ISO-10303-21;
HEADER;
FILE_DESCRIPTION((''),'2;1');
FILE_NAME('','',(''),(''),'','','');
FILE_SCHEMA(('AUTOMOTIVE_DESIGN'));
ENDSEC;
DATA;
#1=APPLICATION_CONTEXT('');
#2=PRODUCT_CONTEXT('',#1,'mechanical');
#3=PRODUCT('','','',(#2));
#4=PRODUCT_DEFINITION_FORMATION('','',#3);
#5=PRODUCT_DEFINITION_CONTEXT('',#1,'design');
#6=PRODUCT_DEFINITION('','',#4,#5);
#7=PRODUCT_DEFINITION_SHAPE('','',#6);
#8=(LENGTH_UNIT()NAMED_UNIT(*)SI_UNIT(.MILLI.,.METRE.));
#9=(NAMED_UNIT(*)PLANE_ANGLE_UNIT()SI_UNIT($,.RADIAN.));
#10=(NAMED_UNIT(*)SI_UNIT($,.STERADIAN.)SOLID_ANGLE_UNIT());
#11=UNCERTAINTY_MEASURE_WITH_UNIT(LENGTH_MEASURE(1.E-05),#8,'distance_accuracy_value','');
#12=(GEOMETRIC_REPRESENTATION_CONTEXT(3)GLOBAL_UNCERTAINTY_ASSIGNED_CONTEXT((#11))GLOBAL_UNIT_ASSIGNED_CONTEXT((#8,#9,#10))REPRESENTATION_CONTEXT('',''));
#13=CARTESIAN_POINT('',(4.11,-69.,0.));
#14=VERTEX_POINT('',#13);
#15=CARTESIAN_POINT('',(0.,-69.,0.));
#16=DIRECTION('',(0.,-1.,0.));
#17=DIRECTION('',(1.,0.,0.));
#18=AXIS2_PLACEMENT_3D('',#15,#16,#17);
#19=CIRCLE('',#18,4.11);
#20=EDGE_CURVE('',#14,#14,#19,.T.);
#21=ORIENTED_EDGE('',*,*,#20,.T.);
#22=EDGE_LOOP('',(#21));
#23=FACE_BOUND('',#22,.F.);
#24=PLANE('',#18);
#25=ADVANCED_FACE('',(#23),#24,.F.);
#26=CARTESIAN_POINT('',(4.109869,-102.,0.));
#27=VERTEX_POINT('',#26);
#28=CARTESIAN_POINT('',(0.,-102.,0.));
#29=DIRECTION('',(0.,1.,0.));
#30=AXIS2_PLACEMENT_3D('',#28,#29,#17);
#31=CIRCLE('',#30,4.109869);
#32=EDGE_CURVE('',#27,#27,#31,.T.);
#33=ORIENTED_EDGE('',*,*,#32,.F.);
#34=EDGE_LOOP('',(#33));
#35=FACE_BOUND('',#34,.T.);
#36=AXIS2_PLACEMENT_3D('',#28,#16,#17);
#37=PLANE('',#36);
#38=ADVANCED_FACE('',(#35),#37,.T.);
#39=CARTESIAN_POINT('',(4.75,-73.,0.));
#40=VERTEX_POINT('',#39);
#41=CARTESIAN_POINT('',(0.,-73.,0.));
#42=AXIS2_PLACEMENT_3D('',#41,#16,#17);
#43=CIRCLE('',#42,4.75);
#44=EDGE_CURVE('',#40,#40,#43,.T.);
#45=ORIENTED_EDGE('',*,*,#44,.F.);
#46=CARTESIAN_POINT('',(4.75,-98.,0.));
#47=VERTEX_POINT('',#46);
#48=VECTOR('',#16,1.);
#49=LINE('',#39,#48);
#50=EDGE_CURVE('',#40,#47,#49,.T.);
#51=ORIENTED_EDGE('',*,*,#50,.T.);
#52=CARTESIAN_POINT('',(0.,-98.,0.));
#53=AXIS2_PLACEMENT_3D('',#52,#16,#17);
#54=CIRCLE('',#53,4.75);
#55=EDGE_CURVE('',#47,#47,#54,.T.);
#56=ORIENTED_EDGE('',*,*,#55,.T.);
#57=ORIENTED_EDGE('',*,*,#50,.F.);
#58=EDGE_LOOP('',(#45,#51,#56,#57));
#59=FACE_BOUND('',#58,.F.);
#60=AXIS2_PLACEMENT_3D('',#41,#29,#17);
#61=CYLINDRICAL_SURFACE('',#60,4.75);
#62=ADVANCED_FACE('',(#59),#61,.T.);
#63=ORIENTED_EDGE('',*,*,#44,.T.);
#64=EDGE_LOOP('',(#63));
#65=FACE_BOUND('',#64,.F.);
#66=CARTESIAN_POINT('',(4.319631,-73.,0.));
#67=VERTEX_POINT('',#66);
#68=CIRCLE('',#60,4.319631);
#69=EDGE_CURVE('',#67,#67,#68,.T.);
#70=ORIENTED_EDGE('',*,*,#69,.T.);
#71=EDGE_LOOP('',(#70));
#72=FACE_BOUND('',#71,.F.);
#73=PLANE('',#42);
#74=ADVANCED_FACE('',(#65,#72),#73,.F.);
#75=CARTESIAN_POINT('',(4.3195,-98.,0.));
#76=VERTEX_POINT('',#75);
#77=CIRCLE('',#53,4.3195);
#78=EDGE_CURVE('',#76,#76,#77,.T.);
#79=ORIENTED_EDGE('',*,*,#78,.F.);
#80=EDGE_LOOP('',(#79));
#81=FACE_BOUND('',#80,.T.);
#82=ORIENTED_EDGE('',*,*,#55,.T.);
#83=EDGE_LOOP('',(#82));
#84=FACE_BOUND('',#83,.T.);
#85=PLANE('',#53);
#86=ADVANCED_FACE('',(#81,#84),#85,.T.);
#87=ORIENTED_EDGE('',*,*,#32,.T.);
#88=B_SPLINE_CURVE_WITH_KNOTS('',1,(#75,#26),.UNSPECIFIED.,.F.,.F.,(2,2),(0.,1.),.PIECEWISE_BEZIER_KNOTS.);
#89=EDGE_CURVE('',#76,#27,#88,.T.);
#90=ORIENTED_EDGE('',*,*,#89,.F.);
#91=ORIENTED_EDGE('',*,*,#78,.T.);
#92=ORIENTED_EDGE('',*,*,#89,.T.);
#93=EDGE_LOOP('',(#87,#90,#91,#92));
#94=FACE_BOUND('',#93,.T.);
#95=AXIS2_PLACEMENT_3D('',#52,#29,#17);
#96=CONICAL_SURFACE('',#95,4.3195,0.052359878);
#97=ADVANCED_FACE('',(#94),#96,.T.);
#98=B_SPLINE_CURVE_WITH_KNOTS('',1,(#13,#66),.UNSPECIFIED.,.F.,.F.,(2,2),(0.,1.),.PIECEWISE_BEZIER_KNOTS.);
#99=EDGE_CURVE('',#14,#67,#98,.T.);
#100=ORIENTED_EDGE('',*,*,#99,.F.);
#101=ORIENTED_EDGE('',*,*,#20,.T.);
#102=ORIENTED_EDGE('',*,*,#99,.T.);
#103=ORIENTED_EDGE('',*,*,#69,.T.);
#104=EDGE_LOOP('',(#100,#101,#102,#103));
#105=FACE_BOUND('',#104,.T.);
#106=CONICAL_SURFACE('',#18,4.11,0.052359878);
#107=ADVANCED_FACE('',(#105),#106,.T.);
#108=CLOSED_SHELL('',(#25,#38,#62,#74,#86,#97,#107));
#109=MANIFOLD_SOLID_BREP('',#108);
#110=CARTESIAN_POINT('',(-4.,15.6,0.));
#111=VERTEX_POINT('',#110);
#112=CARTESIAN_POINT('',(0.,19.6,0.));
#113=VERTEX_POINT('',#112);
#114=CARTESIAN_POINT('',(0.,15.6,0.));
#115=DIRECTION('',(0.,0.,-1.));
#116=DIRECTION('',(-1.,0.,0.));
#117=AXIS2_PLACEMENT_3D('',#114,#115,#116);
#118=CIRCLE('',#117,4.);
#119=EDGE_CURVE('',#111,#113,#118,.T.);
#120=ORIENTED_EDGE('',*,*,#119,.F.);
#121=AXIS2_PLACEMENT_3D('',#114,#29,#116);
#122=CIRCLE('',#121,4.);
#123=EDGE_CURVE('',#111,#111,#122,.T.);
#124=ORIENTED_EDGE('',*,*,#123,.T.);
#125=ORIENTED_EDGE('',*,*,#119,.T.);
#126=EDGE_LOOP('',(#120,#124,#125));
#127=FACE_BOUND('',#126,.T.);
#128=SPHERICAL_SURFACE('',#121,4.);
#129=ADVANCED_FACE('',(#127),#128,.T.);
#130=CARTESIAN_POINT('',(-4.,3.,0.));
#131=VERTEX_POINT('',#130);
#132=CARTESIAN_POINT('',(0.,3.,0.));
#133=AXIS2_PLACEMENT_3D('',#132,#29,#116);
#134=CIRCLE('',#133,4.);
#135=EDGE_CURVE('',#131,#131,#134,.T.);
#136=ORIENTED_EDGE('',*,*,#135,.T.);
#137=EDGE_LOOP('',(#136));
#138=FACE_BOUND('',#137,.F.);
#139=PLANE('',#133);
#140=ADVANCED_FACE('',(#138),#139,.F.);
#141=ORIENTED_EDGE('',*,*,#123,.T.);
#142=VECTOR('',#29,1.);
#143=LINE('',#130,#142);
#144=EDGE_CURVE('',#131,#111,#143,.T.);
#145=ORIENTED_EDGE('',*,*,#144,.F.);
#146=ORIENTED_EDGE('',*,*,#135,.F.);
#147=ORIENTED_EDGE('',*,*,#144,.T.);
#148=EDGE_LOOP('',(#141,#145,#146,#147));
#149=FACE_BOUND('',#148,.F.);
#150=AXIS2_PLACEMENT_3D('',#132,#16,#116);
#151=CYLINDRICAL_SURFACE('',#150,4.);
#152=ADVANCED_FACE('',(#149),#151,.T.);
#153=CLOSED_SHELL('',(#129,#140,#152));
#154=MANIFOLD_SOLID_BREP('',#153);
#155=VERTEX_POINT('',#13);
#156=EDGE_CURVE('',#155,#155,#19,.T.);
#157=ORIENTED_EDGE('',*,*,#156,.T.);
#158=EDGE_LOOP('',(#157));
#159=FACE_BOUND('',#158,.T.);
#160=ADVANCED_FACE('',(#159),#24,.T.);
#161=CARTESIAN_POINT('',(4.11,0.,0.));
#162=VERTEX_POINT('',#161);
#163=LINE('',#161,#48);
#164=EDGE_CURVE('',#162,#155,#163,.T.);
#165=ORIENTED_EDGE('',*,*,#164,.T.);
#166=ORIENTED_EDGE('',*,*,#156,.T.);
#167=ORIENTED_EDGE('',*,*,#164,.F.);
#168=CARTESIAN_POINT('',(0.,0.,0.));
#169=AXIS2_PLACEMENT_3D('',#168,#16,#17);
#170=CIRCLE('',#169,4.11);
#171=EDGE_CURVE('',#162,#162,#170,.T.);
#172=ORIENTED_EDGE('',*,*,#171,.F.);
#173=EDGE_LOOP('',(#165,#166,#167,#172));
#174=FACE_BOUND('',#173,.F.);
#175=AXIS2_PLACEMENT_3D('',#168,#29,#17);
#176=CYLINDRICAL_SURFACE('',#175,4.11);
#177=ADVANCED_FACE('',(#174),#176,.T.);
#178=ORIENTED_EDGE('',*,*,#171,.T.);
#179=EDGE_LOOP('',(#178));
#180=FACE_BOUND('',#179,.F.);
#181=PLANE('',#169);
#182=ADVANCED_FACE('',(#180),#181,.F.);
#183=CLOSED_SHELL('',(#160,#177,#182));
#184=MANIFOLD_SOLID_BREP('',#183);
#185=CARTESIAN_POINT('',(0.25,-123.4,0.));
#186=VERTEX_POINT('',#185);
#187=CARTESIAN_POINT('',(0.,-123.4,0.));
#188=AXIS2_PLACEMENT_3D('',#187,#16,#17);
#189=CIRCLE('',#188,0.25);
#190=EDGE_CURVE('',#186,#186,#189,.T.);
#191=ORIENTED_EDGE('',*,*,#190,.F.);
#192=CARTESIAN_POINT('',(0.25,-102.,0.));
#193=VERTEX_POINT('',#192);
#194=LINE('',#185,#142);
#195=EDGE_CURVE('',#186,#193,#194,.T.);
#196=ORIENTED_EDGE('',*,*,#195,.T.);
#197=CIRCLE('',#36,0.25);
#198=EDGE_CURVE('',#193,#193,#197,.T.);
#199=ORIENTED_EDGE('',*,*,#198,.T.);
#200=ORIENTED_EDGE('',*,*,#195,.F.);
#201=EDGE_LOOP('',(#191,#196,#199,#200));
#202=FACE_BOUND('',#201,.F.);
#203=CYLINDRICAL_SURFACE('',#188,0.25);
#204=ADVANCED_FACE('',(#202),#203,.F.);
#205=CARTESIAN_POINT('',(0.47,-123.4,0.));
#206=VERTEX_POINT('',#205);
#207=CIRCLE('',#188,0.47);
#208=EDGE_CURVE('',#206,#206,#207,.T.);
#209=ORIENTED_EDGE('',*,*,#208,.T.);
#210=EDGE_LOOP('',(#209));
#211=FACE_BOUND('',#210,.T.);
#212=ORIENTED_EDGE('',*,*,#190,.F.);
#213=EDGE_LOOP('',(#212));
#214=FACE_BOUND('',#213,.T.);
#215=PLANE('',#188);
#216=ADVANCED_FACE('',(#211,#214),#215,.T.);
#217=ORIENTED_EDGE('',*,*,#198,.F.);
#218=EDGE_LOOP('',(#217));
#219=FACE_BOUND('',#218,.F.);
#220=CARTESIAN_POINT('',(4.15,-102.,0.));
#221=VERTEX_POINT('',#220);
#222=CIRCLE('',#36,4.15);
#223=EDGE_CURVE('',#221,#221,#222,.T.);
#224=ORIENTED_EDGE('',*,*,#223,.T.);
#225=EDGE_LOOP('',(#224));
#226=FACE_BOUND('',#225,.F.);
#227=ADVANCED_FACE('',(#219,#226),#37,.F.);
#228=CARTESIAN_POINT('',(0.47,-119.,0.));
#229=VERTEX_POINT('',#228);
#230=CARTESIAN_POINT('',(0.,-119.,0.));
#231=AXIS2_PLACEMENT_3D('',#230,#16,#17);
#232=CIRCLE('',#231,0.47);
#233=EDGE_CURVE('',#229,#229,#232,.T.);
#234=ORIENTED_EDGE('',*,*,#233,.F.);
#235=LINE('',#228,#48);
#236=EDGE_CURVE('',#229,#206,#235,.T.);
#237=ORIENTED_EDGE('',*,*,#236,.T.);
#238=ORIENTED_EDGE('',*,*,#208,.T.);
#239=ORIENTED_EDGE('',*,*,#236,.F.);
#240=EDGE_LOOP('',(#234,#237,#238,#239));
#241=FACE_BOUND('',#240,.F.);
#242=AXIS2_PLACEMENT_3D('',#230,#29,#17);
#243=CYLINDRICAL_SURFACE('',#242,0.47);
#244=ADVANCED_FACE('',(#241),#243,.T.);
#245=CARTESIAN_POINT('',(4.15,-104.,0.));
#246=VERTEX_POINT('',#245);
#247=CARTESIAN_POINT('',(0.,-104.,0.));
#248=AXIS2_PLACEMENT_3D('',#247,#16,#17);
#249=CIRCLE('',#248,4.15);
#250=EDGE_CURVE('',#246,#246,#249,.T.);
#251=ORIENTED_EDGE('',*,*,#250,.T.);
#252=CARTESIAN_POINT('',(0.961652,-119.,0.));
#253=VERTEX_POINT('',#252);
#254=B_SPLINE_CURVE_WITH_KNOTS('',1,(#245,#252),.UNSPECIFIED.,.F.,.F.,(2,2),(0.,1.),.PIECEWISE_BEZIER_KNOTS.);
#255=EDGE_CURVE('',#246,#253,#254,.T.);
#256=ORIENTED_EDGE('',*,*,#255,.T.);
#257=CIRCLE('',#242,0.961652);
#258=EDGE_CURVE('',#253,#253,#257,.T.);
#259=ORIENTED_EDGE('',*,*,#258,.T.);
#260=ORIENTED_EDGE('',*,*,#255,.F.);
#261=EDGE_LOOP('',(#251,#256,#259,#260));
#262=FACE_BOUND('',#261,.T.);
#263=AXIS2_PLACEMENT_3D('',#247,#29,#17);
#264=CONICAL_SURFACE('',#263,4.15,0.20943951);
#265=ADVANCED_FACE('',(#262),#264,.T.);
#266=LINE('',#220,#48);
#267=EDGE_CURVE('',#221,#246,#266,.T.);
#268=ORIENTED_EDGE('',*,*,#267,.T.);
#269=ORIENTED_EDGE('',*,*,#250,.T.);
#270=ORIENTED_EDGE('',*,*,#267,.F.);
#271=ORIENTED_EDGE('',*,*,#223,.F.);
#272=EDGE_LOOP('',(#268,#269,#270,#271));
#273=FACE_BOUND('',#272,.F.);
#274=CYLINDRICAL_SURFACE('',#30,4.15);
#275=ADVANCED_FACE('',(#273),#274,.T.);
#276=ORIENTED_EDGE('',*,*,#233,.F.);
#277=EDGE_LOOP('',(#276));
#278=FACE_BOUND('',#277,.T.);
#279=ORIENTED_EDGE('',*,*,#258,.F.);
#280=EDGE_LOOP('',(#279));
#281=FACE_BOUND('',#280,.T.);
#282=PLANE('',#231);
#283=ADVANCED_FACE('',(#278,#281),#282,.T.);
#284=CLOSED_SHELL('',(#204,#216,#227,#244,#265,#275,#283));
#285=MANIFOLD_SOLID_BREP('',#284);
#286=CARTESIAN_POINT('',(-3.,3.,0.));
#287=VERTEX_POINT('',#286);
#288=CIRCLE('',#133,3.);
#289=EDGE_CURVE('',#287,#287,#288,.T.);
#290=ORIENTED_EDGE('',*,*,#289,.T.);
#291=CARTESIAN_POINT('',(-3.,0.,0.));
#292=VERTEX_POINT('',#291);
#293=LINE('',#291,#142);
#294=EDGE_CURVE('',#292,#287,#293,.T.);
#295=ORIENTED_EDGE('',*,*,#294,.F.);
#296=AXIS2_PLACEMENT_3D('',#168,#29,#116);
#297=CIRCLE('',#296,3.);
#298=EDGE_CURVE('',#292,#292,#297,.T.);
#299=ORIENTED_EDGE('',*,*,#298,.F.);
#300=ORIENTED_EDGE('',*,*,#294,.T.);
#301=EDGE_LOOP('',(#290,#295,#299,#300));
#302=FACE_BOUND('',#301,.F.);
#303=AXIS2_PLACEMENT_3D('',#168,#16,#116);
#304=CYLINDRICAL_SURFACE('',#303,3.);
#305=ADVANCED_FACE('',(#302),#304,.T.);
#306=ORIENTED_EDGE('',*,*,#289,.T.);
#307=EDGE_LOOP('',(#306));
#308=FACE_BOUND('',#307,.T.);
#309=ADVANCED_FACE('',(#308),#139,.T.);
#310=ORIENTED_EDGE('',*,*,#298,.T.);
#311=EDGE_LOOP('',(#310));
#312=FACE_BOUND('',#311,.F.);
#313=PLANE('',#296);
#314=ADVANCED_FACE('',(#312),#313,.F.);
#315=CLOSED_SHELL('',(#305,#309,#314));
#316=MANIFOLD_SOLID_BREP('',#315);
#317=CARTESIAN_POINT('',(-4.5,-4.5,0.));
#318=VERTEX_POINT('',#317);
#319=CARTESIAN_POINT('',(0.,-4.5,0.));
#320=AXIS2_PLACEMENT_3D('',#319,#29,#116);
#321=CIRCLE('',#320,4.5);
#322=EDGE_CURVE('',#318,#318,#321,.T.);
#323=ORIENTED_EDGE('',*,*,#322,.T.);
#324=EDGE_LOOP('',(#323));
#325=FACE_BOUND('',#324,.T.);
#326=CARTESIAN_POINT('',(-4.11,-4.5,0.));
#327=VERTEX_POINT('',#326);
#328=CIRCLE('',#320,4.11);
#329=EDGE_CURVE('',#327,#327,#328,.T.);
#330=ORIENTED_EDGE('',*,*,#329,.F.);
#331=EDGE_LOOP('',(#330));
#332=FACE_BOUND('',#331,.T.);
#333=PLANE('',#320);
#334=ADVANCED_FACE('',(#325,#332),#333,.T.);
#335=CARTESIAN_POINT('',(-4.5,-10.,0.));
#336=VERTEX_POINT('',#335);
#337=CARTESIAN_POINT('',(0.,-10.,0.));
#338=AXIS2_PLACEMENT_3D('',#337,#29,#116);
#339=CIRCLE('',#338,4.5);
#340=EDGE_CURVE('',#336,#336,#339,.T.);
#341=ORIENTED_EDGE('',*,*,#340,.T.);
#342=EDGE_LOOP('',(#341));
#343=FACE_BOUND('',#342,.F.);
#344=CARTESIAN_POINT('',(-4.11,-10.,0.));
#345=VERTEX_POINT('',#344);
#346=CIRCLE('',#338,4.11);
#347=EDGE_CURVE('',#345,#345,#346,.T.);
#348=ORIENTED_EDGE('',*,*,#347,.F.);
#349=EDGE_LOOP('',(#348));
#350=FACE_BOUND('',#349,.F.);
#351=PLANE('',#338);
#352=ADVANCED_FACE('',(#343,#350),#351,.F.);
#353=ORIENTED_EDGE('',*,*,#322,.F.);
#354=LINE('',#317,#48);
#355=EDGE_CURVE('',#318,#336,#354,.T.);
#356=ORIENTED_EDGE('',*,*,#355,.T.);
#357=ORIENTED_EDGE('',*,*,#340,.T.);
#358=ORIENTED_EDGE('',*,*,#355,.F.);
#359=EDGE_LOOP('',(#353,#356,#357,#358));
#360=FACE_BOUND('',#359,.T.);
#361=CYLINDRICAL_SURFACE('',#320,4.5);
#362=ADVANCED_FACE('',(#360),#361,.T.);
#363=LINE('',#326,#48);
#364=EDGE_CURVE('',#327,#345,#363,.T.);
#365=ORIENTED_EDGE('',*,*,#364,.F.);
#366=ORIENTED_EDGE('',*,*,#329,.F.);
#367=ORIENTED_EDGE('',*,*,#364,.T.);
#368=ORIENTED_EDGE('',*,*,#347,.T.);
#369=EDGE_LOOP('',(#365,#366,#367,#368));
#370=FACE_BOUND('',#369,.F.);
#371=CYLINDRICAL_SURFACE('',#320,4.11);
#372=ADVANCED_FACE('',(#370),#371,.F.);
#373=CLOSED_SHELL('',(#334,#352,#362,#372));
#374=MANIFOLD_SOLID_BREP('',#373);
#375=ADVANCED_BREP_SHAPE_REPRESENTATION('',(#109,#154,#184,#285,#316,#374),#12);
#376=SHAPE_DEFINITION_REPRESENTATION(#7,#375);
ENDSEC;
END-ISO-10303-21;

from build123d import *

# Parameters (mm, degrees)
F0_R      = 4.11
F1_DEPTH  = 69
F2_R      = 3
F3_DEPTH  = 3
F4_R      = 4
F5_DEPTH  = 16.6
F6_R      = 4
F7_R      = 4.11
F8_DEPTH  = 4
F8_TAPER  = -3
F9_R      = 4.75
F10_DEPTH = 25
F11_R     = 4.3195
F12_DEPTH = 4
F12_TAPER = 3
F15_R     = 4.15
F16_DEPTH = 2
F17_R     = 4.15
F18_DEPTH = 15
F18_TAPER = 12
F19_R     = 0.47
F20_DEPTH = 4.4
F21_R     = 0.25
F22_DEPTH = 25
F25_R     = 4.5
F25_R_2   = 4.11
F26_DEPTH = 5.5


# Not quite as in the source:
# - a feature of the source that left no trace in its solid (it failed there, or was rolled back) is left out


with BuildPart() as f1:
    # F0 (on Front) → F1 (new body)
    with BuildSketch(Plane.XZ):
        Circle(F0_R)
    extrude(amount=F1_DEPTH)


with BuildPart() as f3:
    # F2 (on face) → F3 (new body)
    with BuildSketch(Plane(origin=(0, 0, 0), x_dir=(-1, 0, 0), z_dir=(0, 1, 0))):
        Circle(F2_R)
    extrude(amount=F3_DEPTH)


with BuildPart() as f5:
    # F4 (on face) → F5 (new body)
    with BuildSketch(Plane(origin=(0, 3, 0), x_dir=(-1, 0, 0), z_dir=(0, 1, 0))):
        Circle(F4_R)
    extrude(amount=F5_DEPTH)

    # F6
    f6_edges = [f5.edges().sort_by_distance(p)[0] for p in [
        (4, 19.6, 0),
    ]]
    fillet(f6_edges, radius=F6_R)


with BuildPart() as f8:
    # F7 (on face) → F8 (new body)
    with BuildSketch(Plane.XZ.offset(69)):
        Circle(F7_R)
    extrude(amount=F8_DEPTH, taper=F8_TAPER)

    # F9 (on face) → F10 (join)
    with BuildSketch(Plane.XZ.offset(73)):
        Circle(F9_R)
    extrude(amount=F10_DEPTH)

    # F11 (on face) → F12 (join)
    with BuildSketch(Plane.XZ.offset(98)):
        Circle(F11_R)
    extrude(amount=F12_DEPTH, taper=F12_TAPER)


with BuildPart() as f16:
    # F15 (on face) → F16 (new body)
    with BuildSketch(Plane.XZ.offset(102)):
        Circle(F15_R)
    extrude(amount=F16_DEPTH)

    # F17 (on face) → F18 (join)
    with BuildSketch(Plane.XZ.offset(104)):
        Circle(F17_R)
    extrude(amount=F18_DEPTH, taper=F18_TAPER)

    # F19 (on face) → F20 (join)
    with BuildSketch(Plane.XZ.offset(119)):
        Circle(F19_R)
    extrude(amount=F20_DEPTH)

    # F21 (on face) → F22 (cut)
    with BuildSketch(Plane.XZ.offset(123.4)):
        Circle(F21_R)
    extrude(amount=-F22_DEPTH, mode=Mode.SUBTRACT)


with BuildPart() as f26:
    # F25 (on offset) → F26 (new body)
    with BuildSketch(Plane(origin=(0, -4.5, 0), x_dir=(-1, 0, 0), z_dir=(0, 1, 0))):
        Circle(F25_R)
        Circle(F25_R_2, mode=Mode.SUBTRACT)
    extrude(amount=-F26_DEPTH)


solid = Compound([f1.part, f3.part, f5.part, f8.part, f16.part, f26.part])
